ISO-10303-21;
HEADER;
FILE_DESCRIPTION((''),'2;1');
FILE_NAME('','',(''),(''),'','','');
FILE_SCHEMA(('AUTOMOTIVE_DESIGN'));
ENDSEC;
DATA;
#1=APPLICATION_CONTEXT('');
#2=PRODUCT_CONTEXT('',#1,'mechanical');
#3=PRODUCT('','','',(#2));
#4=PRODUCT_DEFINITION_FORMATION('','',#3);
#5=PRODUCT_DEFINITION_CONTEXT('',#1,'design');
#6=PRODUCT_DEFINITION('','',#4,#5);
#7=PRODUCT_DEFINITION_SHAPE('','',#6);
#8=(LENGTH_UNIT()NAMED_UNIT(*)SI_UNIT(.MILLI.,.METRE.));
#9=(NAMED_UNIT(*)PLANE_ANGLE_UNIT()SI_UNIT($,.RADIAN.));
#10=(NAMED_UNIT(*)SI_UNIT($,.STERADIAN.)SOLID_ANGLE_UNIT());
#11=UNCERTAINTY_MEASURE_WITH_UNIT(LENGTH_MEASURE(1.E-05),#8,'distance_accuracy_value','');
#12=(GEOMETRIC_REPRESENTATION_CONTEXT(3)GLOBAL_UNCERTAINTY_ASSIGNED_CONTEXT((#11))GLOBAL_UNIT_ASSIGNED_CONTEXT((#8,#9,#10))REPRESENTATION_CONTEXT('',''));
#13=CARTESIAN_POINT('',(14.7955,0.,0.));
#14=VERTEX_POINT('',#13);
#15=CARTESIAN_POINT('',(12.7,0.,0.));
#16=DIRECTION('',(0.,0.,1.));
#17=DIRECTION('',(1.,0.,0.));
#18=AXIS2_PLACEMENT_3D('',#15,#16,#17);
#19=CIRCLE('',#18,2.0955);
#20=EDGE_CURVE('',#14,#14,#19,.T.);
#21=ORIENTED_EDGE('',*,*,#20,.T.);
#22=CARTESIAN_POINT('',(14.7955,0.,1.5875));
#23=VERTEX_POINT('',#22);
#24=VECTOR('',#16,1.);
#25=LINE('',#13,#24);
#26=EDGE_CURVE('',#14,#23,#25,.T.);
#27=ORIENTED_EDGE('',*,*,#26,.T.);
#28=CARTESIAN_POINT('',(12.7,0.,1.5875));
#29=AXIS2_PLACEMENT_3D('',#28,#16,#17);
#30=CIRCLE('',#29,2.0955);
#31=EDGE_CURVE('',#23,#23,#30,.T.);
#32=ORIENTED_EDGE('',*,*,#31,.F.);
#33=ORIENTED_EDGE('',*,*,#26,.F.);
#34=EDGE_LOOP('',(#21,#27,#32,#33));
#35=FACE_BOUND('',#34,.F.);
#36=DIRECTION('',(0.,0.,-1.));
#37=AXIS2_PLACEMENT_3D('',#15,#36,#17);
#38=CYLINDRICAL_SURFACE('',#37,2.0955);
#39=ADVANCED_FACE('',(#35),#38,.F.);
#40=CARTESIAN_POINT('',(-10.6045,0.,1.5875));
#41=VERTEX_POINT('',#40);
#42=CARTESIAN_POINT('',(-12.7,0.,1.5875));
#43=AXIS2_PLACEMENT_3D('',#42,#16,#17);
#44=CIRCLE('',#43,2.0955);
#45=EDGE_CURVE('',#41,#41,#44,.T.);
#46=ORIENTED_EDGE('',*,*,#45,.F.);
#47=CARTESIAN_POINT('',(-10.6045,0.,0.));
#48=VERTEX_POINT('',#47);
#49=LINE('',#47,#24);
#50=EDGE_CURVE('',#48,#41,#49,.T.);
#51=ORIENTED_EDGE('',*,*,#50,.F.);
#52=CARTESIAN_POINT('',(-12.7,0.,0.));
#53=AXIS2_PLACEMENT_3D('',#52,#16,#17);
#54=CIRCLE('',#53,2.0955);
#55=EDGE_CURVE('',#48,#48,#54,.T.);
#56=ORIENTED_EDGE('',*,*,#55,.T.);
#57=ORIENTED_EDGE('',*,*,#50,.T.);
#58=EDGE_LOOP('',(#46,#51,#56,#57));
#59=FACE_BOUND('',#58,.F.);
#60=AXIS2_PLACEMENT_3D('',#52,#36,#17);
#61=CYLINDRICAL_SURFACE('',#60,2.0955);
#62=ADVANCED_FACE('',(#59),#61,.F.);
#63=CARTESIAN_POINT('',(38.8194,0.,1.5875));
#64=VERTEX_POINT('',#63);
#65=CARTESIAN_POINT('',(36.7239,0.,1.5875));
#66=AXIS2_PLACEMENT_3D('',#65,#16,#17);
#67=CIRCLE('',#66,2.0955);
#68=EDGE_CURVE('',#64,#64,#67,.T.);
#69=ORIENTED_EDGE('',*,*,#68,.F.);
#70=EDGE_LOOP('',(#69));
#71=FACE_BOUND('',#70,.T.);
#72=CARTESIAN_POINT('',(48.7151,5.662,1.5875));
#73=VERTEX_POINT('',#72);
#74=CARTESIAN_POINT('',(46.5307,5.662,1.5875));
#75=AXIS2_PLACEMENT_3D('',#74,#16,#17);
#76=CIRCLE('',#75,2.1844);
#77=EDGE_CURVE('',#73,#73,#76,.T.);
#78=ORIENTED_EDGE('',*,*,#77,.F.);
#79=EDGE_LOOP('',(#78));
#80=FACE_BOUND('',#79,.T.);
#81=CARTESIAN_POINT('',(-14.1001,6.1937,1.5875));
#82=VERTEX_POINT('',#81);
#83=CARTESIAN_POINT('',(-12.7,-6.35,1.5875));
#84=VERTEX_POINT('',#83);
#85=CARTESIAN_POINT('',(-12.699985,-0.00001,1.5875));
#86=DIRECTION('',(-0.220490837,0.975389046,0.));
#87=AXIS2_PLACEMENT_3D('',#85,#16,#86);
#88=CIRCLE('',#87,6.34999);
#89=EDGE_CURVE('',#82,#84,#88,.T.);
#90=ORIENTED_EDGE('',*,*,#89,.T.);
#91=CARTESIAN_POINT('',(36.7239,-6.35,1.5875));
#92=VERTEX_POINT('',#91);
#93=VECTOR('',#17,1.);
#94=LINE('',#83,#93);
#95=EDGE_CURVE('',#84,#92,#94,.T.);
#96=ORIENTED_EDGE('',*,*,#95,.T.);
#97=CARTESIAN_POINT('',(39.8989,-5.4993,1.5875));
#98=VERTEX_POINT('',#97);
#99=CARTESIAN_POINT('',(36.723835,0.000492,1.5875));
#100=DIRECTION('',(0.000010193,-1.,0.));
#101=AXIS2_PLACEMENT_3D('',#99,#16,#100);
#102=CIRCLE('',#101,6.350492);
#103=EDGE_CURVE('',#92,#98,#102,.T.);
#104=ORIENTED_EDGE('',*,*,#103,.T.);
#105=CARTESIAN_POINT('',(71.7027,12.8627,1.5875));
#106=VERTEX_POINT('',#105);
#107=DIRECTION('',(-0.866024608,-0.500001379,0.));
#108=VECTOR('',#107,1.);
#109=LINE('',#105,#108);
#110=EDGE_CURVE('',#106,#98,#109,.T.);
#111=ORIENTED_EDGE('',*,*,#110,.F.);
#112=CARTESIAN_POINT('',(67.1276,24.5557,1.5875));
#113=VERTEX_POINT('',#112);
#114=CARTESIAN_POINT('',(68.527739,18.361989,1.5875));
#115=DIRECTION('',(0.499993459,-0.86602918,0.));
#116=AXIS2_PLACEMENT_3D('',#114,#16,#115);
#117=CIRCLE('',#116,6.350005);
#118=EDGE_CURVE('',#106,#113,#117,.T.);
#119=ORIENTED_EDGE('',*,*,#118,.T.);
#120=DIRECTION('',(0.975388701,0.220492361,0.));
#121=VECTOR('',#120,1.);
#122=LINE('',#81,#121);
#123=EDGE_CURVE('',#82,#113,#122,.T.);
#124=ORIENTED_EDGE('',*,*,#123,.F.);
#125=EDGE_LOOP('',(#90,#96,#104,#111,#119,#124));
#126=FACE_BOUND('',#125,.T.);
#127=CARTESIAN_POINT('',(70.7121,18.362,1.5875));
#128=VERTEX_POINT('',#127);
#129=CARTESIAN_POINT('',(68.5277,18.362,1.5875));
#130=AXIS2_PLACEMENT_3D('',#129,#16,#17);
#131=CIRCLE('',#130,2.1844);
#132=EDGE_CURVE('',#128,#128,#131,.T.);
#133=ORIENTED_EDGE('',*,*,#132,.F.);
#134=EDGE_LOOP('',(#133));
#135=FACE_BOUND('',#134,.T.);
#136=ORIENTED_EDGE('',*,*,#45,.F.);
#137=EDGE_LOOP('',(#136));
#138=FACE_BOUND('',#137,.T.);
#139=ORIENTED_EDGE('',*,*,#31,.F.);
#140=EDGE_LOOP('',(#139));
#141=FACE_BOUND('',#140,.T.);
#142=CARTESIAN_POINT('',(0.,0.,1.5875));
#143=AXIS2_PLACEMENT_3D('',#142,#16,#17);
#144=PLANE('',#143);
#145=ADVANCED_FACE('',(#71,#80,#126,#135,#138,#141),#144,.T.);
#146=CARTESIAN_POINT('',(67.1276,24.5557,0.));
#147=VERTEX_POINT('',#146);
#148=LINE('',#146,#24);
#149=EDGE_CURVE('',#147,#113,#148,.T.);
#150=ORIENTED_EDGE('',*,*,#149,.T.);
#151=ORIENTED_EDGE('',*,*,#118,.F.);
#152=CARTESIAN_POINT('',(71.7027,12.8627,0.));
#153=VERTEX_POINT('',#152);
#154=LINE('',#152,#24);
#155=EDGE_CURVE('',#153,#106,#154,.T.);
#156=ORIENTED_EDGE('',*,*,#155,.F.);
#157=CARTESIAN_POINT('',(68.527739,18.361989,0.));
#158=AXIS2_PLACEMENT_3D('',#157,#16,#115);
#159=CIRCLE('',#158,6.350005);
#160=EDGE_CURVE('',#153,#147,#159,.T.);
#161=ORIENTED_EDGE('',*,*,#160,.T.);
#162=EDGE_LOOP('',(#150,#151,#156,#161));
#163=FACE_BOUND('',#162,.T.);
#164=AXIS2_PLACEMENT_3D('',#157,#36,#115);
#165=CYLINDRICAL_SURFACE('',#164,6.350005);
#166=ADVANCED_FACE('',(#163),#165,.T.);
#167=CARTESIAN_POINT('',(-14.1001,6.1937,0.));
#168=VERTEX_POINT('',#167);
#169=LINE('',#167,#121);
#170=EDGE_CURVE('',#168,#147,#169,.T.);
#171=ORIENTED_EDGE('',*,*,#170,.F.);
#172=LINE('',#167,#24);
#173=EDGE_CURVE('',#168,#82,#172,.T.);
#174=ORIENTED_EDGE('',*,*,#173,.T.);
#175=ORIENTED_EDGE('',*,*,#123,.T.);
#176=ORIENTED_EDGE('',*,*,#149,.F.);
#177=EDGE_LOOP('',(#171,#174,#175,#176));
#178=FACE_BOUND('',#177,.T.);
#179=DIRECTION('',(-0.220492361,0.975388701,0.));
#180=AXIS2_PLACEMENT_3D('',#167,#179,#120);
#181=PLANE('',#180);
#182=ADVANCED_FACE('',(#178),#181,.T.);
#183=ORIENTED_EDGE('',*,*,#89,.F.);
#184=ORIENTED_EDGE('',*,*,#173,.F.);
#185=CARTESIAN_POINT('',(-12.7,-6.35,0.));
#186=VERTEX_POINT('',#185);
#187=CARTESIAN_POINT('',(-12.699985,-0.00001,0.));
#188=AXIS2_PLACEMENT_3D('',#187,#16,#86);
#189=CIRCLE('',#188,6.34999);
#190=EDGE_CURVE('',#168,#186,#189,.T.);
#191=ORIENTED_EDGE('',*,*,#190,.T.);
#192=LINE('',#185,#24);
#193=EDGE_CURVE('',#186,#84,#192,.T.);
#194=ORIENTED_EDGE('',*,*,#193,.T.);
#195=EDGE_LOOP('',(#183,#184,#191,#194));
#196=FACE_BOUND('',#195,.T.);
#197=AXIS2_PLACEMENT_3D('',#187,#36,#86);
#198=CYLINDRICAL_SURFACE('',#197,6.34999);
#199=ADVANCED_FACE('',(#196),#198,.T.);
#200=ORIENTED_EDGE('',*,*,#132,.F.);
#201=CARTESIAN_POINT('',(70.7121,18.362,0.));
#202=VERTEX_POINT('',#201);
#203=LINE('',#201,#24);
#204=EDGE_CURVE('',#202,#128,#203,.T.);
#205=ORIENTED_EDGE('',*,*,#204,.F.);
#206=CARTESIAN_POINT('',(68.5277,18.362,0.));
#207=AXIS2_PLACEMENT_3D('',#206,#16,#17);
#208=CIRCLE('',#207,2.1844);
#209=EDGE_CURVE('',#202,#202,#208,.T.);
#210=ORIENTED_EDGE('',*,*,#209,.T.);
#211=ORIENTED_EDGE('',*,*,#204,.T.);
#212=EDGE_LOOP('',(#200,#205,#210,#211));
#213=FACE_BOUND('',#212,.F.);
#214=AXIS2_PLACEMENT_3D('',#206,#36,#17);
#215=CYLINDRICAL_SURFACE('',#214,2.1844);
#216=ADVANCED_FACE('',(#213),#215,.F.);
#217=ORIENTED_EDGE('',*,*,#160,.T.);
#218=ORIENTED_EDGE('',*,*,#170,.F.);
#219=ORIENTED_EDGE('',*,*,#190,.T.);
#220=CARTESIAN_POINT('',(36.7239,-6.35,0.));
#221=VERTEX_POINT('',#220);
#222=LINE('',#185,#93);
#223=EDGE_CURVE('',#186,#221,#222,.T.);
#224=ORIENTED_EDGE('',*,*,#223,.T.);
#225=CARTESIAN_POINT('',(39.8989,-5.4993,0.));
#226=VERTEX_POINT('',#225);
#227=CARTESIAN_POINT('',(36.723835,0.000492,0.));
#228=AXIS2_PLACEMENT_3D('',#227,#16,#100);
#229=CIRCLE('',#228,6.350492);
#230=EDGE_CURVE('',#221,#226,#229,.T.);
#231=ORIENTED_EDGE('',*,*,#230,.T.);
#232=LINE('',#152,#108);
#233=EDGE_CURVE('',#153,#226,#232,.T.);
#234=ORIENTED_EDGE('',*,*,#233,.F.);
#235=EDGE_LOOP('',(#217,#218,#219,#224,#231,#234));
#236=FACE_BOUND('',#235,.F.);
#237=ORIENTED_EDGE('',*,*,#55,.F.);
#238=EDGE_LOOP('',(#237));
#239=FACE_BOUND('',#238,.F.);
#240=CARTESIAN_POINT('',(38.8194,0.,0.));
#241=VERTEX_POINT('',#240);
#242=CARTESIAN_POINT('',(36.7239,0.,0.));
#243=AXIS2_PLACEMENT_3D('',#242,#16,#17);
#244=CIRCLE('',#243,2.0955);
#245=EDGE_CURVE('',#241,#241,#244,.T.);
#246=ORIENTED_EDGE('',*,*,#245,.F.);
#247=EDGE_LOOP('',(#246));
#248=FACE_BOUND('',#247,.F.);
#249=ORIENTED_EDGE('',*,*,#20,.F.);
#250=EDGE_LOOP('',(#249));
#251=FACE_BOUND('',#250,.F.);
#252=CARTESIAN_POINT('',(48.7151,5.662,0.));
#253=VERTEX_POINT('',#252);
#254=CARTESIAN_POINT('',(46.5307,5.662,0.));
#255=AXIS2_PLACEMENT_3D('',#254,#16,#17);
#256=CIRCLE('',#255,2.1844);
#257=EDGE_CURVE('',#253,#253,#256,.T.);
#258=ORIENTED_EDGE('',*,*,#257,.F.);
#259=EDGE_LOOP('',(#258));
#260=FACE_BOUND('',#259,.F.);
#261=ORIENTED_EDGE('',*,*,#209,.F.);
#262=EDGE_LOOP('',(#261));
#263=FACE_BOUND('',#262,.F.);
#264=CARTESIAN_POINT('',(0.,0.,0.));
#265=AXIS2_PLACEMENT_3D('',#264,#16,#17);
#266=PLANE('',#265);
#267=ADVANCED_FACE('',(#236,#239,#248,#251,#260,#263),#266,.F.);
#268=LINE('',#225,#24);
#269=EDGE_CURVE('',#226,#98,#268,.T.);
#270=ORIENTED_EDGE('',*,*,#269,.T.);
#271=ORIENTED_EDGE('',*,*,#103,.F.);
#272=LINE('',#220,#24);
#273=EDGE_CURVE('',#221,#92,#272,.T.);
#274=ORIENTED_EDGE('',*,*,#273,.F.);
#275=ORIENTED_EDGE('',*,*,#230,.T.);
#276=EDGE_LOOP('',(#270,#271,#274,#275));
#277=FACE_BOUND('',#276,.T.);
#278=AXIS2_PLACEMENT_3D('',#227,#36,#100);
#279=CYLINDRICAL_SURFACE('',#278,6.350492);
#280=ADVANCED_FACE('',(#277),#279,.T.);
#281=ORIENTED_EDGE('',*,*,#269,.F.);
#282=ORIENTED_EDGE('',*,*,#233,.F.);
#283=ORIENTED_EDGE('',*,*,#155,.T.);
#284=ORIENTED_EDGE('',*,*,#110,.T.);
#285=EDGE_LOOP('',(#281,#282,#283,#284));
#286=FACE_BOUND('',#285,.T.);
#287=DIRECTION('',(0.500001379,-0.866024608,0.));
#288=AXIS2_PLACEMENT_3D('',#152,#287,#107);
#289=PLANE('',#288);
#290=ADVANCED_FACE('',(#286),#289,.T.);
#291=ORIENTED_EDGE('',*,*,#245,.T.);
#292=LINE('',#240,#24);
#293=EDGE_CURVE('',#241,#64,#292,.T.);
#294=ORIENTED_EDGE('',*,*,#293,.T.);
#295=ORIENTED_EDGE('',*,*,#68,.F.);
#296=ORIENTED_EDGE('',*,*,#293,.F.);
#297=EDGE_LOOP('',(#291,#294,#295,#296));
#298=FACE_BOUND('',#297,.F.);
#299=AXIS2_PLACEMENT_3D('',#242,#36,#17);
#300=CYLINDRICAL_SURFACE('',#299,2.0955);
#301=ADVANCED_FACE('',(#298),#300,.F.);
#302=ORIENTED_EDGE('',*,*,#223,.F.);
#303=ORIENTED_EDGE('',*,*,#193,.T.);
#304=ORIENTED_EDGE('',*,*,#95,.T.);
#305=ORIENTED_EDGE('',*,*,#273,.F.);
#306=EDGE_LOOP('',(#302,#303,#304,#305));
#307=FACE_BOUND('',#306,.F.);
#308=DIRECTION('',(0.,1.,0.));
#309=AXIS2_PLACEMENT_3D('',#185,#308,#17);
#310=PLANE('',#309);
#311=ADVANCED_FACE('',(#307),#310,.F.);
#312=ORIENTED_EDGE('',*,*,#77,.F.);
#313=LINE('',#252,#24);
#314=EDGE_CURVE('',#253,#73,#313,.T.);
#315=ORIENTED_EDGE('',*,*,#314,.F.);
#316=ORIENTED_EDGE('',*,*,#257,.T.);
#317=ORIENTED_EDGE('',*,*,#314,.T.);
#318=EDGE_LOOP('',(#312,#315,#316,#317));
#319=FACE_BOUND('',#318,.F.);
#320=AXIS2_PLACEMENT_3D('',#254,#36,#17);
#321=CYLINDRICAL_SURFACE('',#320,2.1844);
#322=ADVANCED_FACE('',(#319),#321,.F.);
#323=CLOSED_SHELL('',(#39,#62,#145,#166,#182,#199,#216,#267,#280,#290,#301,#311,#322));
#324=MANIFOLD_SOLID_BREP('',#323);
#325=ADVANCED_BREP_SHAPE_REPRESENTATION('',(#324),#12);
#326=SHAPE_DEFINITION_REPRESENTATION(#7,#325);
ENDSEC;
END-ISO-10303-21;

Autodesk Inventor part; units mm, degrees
ref_plane "YZ Plane" through (0, 0, 0) normal (1, 0, 0) x (0, 1, 0)
ref_plane "XZ Plane" through (0, 0, 0) normal (0, 1, 0) x (-1, 0, 0)
ref_plane "XY Plane" through (0, 0, 0) normal (0, 0, 1) x (1, 0, 0)
sketch "main" plane through (0, 0, 0) normal (0, 0, 1) x (1, 0, 0)
  circle A0 centre (15.0202, -6.3416) radius 2.1844
  circle A1 centre (37.0172, 6.3584) radius 2.1844
  arc A2 (40.1922, 0.8591) -> (33.8536, 11.8642) centre (37.0172, 6.3584) ccw
  line L0 (-44.2105, -18.3536) -> (5.2134, -18.3536)
  line L1 (40.1922, 0.8591) -> (8.3884, -17.5028)
  circle A3 centre (5.2134, -12.0036) radius 2.0955
  arc A4 (5.2134, -18.3536) -> (8.3884, -17.5028) centre (5.2134, -12.0036) ccw
  line L2 (5.2134, -12.0036) -> (43.3134, -12.0036) construction
  arc A5 (-45.6106, -5.8098) -> (-44.2105, -18.3536) centre (-44.2105, -12.0036) ccw
  line L3 (33.8536, 11.8642) -> (68.8891, 11.8642) construction
  line L4 (-45.6106, -5.8098) -> (35.6171, 12.5521)
  circle A6 centre (-18.8105, -12.0036) radius 2.0955
  circle A7 centre (-44.2105, -12.0036) radius 2.0955
  point P0 (-0.7926, -1.6009)
  dimension "d3" = 12.7
  dimension "d7" = 4.191
  dimension "d8" = 6.35
  dimension "d13" = 25.4
  dimension "d16" = 4.191
sketch "Sketch1" plane through (0, 0, 0) normal (0, 0, 1) x (1, 0, 0)
  circle A0 centre (46.5307, 5.662) radius 2.1844
  circle A1 centre (68.5277, 18.362) radius 2.1844
  arc A2 (71.7027, 12.8627) -> (65.3641, 23.8678) centre (68.5277, 18.362) ccw
  line L0 (-12.7, -6.35) -> (36.7239, -6.35)
  line L1 (71.7027, 12.8627) -> (39.8989, -5.4993)
  circle A3 centre (36.7239, 0) radius 2.0955
  arc A4 (36.7239, -6.35) -> (39.8989, -5.4993) centre (36.7239, 0) ccw
  line L2 (36.7239, 0) -> (74.8239, 0) construction
  arc A5 (-14.1001, 6.1937) -> (-12.7, -6.35) centre (-12.7, 0) ccw
  line L3 (65.3641, 23.8678) -> (100.3996, 23.8678) construction
  line L4 (-14.1001, 6.1937) -> (67.1276, 24.5557)
  circle A6 centre (12.7, 0) radius 2.0955
  circle A7 centre (-12.7, 0) radius 2.0955
  point P0 (0, 0)
extrude "Extrusion1" add sketch "Sketch1" along normal blind 1.5875
equation "\"BendRadius\" = Thickness"
equation "\"BendReliefWidth\" = Thickness"
equation "\"BendReliefDepth\" = 0.5 * Thickness"
equation "\"CornerReliefSize\" = 4 * Thickness"
equation "\"MinimumRemnant\" = 2 * Thickness"
equation "\"TransitionRadius\" = BendRadius"
equation "\"JacobiRadiusSize\" = BendRadius"
equation "\"GapSize\" = Thickness"
equation "\"Thickness\" = 1.5875"
properties part number "60 Degree Gusset" material "Acetal Resin, White"
